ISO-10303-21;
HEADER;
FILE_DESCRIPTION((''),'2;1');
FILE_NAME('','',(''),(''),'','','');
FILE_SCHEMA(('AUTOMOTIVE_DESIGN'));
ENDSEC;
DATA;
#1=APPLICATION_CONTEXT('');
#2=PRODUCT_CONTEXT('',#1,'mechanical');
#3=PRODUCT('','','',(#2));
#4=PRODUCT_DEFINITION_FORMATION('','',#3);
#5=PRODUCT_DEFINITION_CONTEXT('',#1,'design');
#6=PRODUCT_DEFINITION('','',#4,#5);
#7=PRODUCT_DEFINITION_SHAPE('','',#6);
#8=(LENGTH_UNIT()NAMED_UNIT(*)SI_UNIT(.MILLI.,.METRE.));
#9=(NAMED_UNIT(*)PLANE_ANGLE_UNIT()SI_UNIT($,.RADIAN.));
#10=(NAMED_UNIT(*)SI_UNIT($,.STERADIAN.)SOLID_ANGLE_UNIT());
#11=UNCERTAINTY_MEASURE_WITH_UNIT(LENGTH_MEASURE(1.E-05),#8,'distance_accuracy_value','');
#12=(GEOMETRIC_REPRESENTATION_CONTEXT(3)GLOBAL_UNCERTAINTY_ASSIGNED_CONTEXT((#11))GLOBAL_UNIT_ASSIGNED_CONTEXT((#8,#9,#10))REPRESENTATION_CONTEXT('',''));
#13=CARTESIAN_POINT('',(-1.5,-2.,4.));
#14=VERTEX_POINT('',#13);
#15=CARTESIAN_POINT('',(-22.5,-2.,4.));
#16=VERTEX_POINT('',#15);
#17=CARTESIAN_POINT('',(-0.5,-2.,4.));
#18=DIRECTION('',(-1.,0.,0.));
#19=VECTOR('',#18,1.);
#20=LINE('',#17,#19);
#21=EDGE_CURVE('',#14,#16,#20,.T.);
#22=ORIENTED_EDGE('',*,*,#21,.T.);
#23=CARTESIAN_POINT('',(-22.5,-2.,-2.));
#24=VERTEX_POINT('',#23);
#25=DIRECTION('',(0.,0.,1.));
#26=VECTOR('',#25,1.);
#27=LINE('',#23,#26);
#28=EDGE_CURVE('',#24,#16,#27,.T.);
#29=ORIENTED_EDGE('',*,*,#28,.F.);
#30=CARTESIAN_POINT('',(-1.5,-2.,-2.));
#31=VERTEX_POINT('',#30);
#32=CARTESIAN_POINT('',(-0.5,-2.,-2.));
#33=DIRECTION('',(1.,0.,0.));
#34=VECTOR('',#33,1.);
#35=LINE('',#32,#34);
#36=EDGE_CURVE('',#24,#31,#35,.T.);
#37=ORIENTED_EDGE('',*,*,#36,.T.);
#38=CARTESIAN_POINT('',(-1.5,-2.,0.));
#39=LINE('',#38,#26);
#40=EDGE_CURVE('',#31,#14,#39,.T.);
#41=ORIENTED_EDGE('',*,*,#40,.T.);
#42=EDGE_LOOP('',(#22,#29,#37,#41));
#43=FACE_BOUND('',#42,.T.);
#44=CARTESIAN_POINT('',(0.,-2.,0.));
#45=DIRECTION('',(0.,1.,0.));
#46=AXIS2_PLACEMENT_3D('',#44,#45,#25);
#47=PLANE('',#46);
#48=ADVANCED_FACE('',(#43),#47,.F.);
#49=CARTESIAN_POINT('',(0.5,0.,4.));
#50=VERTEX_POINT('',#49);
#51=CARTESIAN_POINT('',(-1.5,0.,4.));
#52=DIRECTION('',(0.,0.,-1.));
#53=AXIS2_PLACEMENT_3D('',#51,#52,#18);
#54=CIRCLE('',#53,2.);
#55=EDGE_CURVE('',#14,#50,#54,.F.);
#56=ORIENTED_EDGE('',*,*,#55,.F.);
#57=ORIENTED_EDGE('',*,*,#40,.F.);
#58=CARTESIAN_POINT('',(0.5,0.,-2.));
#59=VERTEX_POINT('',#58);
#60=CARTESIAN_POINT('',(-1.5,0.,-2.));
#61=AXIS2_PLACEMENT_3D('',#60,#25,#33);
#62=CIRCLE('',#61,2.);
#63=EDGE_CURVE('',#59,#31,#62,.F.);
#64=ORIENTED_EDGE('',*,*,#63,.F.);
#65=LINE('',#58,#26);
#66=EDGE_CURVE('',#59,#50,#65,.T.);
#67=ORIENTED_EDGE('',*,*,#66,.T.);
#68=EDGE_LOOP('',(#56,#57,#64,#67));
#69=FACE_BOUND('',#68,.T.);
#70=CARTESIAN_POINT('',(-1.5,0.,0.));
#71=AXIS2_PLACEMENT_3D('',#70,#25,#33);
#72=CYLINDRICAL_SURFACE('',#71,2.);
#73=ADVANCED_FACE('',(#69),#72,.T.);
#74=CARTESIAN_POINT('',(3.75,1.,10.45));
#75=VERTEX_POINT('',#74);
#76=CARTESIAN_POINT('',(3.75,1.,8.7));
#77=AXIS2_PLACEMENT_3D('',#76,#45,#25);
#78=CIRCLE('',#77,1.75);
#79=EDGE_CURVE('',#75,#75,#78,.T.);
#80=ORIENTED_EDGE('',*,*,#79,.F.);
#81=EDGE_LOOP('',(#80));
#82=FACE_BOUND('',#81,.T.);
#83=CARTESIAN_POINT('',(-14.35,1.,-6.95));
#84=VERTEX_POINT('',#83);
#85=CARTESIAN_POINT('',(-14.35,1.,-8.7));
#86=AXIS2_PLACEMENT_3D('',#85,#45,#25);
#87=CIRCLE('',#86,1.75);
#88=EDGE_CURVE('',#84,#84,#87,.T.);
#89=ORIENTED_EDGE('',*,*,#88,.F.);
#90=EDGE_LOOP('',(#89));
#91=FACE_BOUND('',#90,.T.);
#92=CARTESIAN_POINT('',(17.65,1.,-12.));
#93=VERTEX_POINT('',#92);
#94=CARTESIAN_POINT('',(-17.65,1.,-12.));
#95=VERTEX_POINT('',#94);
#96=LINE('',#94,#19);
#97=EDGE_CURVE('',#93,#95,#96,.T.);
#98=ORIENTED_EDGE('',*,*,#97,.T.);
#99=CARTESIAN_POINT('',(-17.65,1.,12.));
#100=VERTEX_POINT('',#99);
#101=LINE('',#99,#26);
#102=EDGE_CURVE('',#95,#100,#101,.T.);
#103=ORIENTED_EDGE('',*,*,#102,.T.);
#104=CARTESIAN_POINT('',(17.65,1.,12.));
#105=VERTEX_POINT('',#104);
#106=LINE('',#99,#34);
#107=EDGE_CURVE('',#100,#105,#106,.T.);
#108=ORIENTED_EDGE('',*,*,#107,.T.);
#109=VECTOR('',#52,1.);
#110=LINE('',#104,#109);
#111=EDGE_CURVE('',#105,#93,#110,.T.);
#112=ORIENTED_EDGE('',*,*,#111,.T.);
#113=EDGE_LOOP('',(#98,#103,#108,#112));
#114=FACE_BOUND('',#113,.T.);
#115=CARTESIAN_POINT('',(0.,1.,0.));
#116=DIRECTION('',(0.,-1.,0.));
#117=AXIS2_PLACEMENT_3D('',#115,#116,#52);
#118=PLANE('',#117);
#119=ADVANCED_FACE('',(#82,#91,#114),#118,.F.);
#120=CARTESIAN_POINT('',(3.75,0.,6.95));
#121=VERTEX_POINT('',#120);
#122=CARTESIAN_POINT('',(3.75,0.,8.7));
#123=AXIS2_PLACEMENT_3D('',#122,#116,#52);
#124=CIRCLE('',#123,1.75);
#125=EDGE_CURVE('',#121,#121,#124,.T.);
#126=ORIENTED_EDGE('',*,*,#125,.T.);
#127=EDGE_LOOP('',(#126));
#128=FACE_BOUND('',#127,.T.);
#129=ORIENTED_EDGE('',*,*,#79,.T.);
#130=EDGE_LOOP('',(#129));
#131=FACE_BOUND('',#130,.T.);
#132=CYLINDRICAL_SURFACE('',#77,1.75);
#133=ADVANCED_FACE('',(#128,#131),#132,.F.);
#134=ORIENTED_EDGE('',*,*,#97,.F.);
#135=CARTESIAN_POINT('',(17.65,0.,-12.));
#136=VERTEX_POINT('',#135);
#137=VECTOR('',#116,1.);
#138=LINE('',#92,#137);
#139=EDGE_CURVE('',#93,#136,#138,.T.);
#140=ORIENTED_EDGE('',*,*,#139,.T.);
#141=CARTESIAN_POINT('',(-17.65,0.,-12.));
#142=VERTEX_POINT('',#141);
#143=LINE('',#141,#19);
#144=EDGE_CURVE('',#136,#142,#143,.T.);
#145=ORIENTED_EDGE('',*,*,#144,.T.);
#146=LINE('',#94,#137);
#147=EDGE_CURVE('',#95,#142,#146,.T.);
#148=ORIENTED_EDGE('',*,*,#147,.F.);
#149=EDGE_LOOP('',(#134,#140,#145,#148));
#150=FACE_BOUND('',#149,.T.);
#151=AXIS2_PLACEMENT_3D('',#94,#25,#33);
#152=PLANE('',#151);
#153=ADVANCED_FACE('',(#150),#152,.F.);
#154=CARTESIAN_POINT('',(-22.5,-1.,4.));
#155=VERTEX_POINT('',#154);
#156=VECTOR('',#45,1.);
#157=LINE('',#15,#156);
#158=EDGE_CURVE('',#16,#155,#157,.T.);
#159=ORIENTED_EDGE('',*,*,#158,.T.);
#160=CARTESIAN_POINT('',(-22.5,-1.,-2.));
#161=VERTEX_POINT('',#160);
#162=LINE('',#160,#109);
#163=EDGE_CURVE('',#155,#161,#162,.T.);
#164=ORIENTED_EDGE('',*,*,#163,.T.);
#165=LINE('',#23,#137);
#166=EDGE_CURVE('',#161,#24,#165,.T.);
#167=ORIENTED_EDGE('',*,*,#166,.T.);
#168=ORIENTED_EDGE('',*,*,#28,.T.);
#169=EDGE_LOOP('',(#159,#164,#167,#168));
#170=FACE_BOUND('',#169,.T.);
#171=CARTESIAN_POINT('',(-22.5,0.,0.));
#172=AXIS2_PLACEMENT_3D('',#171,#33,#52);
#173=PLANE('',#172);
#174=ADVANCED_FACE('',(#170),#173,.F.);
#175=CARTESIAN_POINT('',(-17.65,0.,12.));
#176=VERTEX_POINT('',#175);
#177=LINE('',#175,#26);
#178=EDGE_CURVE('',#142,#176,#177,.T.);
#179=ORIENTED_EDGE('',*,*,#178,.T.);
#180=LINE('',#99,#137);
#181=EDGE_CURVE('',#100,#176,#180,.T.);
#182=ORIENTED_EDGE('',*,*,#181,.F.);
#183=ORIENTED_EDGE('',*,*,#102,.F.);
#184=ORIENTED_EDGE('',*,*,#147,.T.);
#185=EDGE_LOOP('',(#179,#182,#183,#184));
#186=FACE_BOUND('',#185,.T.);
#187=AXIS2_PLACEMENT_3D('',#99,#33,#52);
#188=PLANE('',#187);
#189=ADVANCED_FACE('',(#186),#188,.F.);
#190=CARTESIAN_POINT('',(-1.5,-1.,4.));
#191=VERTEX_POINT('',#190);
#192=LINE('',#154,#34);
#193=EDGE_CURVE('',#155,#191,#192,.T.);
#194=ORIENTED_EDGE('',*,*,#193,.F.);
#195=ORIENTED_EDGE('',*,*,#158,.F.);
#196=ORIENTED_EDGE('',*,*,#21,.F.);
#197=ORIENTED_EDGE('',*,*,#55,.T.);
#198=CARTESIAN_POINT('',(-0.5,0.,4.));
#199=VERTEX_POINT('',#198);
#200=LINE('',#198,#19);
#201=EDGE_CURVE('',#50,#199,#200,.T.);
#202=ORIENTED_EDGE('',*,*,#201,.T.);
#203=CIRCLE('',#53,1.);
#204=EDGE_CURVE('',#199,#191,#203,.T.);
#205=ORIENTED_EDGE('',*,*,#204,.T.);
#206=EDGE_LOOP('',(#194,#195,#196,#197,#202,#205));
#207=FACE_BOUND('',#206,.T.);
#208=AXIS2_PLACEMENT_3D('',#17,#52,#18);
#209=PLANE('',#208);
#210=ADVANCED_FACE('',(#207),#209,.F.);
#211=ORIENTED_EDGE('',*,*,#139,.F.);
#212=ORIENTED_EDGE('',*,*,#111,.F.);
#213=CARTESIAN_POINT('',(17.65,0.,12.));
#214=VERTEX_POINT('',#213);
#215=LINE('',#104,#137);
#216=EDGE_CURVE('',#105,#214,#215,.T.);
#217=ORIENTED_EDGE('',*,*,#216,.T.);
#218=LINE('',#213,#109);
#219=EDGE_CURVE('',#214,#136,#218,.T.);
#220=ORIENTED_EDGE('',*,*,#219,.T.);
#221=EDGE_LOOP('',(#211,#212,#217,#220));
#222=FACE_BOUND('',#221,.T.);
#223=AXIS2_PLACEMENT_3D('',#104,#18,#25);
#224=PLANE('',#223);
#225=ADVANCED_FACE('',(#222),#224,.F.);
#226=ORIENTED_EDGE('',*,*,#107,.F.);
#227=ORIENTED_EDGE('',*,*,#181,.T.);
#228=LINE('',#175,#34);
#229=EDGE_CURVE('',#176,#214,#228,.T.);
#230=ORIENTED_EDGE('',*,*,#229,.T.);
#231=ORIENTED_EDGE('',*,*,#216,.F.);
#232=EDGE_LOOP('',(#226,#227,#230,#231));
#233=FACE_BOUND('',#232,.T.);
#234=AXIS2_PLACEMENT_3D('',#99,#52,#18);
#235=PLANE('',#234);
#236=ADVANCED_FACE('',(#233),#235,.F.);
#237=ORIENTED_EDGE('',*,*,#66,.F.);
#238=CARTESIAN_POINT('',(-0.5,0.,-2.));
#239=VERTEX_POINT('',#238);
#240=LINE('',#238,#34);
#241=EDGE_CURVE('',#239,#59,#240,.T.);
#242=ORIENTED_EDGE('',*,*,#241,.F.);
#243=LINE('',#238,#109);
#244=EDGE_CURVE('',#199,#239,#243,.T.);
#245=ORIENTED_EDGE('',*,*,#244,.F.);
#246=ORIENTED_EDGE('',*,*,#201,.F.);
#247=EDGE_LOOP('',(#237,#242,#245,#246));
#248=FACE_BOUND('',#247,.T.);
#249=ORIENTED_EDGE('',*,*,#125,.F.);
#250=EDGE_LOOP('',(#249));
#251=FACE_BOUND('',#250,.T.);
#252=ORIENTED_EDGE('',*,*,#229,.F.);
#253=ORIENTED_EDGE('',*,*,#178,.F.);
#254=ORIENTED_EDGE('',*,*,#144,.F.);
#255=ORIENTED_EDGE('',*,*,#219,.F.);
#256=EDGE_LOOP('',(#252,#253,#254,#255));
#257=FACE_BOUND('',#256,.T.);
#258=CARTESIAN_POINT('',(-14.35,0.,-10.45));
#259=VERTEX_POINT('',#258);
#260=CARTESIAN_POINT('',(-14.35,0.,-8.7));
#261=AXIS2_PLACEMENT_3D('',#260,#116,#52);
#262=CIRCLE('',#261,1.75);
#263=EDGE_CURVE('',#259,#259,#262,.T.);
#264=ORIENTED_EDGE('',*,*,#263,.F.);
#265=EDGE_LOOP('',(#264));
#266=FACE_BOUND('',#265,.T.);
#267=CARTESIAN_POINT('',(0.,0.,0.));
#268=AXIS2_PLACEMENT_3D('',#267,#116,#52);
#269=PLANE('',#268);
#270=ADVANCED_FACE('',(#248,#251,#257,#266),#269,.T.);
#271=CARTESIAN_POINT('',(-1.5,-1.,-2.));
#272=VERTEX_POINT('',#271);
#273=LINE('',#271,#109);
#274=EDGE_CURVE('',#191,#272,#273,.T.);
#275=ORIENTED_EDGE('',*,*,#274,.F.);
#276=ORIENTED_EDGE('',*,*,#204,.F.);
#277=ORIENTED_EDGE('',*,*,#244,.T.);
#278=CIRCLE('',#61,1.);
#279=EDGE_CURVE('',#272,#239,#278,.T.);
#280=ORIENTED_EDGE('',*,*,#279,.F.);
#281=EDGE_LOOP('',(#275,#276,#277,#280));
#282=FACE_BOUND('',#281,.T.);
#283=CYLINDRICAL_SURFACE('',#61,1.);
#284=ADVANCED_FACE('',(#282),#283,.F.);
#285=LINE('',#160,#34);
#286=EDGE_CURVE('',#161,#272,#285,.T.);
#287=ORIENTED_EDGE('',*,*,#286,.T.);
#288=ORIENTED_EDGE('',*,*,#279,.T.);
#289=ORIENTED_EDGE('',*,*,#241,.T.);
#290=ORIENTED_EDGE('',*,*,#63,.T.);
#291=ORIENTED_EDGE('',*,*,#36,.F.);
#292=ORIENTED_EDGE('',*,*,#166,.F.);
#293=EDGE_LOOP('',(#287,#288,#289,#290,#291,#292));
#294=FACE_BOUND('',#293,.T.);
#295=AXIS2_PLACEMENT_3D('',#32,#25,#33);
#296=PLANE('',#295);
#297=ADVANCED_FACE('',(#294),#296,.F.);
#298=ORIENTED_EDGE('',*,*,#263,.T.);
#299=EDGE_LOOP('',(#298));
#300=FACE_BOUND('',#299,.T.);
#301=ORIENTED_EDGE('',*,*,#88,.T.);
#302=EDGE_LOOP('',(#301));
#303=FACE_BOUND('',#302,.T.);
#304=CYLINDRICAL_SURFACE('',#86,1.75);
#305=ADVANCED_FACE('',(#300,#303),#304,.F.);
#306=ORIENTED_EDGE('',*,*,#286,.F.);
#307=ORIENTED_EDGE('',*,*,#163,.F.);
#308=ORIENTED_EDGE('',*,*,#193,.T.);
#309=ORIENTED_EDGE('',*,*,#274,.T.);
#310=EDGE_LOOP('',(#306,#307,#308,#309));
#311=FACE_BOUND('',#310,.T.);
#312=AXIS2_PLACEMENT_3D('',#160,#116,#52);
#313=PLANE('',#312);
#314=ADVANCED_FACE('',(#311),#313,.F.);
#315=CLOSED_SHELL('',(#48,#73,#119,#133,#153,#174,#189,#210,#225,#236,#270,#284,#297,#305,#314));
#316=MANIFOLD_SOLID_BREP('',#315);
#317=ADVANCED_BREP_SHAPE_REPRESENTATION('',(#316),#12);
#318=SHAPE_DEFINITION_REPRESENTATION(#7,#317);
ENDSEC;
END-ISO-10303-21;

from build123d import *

# Parameters (mm, degrees)
SKETCH1_W                  = 35.3
SKETCH1_H                  = 24
BOSS_EXTRUDE1_DEPTH        = 1
F_3_5_3_5_DIAMETER_HOLE1_D = 3.5
SKETCH5_W                  = 1
SKETCH5_H                  = 6
BOSS_EXTRUDE2_DEPTH        = 2
SKETCH6_W                  = 6
SKETCH6_H                  = 1
BOSS_EXTRUDE3_DEPTH        = 22
FILLET1_R                  = 1
FILLET2_R                  = 2


with BuildPart() as part:
    # Sketch1 → Boss-Extrude1 (new body)
    with BuildSketch(Plane(origin=(0, 0, 0), x_dir=(1, 0, 0), z_dir=(0, 1, 0))):
        Rectangle(SKETCH1_W, SKETCH1_H)
    extrude(amount=BOSS_EXTRUDE1_DEPTH)

    # Ø3.5 (3.5) Diameter Hole1 (through all)
    with Locations(Plane(origin=(0, 1, 0), x_dir=(1, 0, 0), z_dir=(0, 1, 0))):
        with Locations((-14.35, 8.7), (3.75, -8.7)):
            Hole(F_3_5_3_5_DIAMETER_HOLE1_D / 2)

    # Sketch5 → Boss-Extrude2 (add)
    with BuildSketch(Plane.XZ):
        with Locations((0, 1)):
            Rectangle(SKETCH5_W, SKETCH5_H)
    extrude(amount=BOSS_EXTRUDE2_DEPTH)

    # Sketch6 → Boss-Extrude3 (add)
    with BuildSketch(Plane.ZY.offset(0.5)):
        with Locations((1, -1.5)):
            Rectangle(SKETCH6_W, SKETCH6_H)
    extrude(amount=BOSS_EXTRUDE3_DEPTH)

    # Fillet1
    fillet1_edges = [part.edges().sort_by_distance(p)[0] for p in [
        (-0.5, -1, 1),
    ]]
    fillet(fillet1_edges, radius=FILLET1_R - 0.0001)  # a hair under: the kernel refuses the full size

    # Fillet2
    fillet2_edges = [part.edges().sort_by_distance(p)[0] for p in [
        (0.5, -2, 1),
    ]]
    fillet(fillet2_edges, radius=FILLET2_R - 0.0001)  # a hair under: the kernel refuses the full size


solid = part.part
